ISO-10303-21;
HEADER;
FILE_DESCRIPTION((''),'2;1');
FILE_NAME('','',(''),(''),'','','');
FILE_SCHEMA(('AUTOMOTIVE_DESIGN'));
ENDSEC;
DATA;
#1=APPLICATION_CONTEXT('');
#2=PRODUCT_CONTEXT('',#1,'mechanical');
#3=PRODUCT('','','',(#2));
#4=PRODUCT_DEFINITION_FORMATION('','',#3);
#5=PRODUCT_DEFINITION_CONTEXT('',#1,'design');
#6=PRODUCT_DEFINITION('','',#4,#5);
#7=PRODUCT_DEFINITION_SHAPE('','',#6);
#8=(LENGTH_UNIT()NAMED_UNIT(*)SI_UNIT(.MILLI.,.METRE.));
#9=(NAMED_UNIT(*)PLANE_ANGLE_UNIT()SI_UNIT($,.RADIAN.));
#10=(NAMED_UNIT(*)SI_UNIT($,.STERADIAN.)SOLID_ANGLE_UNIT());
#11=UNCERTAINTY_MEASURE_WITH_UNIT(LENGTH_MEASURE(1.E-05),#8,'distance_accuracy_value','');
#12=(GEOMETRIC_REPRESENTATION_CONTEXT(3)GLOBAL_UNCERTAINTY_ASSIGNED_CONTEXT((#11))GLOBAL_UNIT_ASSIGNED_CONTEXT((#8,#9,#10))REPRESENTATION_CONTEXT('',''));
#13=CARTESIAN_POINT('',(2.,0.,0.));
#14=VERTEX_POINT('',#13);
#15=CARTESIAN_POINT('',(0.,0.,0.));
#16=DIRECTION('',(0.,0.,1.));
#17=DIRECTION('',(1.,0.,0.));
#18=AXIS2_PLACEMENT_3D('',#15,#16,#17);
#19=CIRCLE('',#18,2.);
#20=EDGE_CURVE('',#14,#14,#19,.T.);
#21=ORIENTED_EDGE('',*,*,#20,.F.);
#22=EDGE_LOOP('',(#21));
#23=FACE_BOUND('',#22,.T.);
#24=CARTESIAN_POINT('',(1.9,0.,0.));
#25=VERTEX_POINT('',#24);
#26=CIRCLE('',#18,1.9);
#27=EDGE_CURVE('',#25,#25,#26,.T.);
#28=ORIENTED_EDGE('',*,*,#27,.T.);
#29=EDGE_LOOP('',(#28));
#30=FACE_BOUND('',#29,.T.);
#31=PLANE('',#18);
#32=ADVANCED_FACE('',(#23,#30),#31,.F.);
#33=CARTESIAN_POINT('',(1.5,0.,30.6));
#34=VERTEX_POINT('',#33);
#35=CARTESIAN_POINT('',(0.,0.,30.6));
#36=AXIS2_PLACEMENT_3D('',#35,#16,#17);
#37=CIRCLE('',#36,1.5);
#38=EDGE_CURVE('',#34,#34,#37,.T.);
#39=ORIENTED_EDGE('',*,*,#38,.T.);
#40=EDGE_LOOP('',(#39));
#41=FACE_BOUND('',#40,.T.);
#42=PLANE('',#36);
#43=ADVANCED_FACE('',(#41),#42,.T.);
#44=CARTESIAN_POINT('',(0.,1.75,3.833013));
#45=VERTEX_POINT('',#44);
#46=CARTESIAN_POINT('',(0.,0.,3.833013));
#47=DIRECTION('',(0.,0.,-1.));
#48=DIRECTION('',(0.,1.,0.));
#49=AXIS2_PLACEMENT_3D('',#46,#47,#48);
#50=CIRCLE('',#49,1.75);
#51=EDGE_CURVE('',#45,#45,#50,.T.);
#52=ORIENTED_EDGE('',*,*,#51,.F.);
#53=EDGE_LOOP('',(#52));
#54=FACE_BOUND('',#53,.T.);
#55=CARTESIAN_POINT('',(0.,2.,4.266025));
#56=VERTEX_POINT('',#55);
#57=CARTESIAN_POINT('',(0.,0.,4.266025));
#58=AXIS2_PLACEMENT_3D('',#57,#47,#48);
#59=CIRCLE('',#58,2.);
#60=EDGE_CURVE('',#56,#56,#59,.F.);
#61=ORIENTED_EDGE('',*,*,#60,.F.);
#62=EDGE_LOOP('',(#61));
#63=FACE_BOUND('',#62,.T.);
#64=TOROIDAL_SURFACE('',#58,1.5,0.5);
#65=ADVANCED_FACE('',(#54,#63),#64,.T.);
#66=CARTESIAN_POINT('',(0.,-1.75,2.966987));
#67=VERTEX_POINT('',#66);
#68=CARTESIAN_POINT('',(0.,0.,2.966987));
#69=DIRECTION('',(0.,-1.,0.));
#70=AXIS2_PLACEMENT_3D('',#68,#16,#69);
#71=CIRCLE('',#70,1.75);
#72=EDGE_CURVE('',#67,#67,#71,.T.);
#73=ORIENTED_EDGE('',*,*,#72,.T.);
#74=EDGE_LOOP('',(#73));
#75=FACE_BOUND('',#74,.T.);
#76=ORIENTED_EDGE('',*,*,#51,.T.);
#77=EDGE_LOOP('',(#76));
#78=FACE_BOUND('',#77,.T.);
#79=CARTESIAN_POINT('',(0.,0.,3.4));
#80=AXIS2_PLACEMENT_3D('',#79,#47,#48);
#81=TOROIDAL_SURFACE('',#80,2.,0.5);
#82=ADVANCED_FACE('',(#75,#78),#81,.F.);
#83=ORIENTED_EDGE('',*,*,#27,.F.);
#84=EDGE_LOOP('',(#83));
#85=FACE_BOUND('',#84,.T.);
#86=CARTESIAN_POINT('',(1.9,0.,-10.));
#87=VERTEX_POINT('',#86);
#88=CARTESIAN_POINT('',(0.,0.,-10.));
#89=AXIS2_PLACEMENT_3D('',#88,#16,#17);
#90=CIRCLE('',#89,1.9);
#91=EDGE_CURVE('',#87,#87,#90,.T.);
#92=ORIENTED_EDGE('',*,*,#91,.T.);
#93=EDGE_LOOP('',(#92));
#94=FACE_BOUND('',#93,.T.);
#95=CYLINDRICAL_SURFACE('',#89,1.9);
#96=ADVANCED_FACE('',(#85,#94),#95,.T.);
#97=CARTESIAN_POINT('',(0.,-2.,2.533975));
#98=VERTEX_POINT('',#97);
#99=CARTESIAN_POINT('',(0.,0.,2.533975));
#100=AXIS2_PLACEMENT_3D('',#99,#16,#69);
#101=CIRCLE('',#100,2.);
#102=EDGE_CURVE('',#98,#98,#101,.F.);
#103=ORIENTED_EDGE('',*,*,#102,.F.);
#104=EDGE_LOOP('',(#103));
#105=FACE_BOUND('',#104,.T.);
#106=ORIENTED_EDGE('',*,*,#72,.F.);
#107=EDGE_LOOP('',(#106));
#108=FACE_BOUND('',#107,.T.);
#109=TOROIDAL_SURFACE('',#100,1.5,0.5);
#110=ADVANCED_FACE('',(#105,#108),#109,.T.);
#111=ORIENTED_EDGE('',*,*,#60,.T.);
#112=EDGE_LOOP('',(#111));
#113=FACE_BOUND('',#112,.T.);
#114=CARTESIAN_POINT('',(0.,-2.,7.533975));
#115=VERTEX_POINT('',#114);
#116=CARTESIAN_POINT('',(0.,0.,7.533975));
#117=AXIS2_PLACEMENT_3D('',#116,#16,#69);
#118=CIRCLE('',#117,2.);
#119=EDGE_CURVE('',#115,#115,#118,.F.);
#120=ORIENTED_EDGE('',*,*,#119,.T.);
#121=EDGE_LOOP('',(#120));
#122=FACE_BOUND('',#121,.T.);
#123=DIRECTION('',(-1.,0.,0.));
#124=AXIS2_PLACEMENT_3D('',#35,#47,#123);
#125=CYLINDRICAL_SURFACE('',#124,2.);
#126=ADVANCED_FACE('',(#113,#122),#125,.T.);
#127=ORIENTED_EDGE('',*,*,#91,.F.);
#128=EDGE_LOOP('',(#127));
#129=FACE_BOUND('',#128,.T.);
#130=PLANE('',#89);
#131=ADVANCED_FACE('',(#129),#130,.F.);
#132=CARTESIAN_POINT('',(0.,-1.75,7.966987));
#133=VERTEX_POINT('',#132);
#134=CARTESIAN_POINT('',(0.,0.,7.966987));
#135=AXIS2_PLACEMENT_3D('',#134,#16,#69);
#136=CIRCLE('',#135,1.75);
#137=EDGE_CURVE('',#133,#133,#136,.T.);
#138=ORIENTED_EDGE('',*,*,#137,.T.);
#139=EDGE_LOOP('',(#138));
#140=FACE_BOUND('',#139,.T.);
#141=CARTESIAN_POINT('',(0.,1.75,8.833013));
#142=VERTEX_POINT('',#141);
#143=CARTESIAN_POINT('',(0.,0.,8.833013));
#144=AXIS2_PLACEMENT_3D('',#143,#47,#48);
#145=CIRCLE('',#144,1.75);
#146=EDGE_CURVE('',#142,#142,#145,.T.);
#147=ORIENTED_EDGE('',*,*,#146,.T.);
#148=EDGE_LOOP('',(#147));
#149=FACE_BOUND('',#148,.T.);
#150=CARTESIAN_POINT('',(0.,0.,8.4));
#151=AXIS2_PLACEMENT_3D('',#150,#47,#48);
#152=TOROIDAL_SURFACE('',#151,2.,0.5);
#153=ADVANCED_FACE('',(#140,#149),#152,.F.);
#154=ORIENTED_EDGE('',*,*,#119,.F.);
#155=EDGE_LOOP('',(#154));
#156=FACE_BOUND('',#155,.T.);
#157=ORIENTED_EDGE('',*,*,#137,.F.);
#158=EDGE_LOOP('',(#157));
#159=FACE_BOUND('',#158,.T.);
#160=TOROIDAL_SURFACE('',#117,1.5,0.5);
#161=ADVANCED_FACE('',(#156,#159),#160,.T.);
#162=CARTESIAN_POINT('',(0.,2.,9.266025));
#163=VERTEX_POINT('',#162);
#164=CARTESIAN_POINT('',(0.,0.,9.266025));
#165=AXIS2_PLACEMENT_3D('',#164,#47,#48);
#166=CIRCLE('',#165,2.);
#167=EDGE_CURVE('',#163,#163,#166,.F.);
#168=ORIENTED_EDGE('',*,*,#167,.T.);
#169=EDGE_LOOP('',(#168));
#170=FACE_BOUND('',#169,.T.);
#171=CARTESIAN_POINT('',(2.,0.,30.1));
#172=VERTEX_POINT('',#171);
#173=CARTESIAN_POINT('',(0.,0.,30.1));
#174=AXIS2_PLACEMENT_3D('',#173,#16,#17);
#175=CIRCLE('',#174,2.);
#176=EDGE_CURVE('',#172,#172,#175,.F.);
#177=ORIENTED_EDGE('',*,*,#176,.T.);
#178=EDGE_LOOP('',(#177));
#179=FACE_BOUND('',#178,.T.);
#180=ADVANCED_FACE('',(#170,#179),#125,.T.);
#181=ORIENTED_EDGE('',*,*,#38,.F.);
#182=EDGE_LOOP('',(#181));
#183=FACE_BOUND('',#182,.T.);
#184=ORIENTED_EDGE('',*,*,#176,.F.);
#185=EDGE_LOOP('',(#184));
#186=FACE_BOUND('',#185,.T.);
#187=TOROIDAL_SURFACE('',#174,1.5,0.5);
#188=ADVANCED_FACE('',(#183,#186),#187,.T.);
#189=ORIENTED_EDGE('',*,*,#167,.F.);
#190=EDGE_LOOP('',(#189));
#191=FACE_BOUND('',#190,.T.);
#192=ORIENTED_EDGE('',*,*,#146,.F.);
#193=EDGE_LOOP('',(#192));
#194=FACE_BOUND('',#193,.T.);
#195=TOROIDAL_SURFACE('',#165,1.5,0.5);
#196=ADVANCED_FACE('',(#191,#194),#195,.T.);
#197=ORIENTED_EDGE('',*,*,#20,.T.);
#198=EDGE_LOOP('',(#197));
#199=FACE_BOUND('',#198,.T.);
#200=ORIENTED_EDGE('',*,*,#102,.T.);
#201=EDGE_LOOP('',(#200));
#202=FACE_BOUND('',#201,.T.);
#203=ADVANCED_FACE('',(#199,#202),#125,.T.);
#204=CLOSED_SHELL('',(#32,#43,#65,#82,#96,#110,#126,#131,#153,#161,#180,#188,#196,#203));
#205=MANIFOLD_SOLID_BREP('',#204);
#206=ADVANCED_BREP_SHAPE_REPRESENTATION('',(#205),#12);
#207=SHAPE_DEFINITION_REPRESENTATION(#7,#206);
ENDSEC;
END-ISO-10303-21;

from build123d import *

# Parameters (mm, degrees)
SKETCH1_R           = 2
BOSS_EXTRUDE1_DEPTH = 30.6
SKETCH2_R           = 0.5
SKETCH3_R           = 1.9
BOSS_EXTRUDE2_DEPTH = 10


with BuildPart() as part:
    # Sketch1 → Boss-Extrude1 (new body)
    with BuildSketch(Plane.XY):
        Circle(SKETCH1_R)
    extrude(amount=BOSS_EXTRUDE1_DEPTH)

    # Sketch2 → Cut-Revolve1 (revolve, cut)
    with BuildSketch(Plane(origin=(0, 0, 0), x_dir=(0, 0, -1), z_dir=(1, 0, 0))):
        with Locations((-3.4, 2)):
            Circle(SKETCH2_R)
        with Locations((-8.4, 2)):
            Circle(SKETCH2_R)
    revolve(axis=Axis((0, 0, 0), (0, 0, 1)), mode=Mode.SUBTRACT)

    # Fillet1: read off the stored shape, not the designer's step
    # Fillet1 outline → Fillet1 (revolve, cut)
    with BuildSketch(Plane.XZ):
        with BuildLine():
            ThreePointArc((1.75, 2.966987298), (1.933012702, 2.783974596), (2, 2.533974596))
            Line((2, 2.533974596), (2, 2.966987298))
            Line((2, 2.966987298), (1.75, 2.966987298))
        make_face()
        with BuildLine():
            ThreePointArc((2, 4.266025404), (1.933012702, 4.016025404), (1.75, 3.833012702))
            Line((1.75, 3.833012702), (2, 3.833012702))
            Line((2, 3.833012702), (2, 4.266025404))
        make_face()
        with BuildLine():
            ThreePointArc((1.75, 7.966987298), (1.933012702, 7.783974596), (2, 7.533974596))
            Line((2, 7.533974596), (2, 7.966987298))
            Line((2, 7.966987298), (1.75, 7.966987298))
        make_face()
        with BuildLine():
            ThreePointArc((2, 9.266025404), (1.933012702, 9.016025404), (1.75, 8.833012702))
            Line((1.75, 8.833012702), (2, 8.833012702))
            Line((2, 8.833012702), (2, 9.266025404))
        make_face()
        with BuildLine():
            Line((2, 30.1), (2, 30.6))
            Line((2, 30.6), (1.5, 30.6))
            ThreePointArc((1.5, 30.6), (1.853553391, 30.453553391), (2, 30.1))
        make_face()
    revolve(axis=Axis((0, 0, 0), (0, 0, 1)), mode=Mode.SUBTRACT)

    # Sketch3 → Boss-Extrude2 (add)
    with BuildSketch(Plane.XY):
        Circle(SKETCH3_R)
    extrude(amount=-BOSS_EXTRUDE2_DEPTH)


solid = part.part
